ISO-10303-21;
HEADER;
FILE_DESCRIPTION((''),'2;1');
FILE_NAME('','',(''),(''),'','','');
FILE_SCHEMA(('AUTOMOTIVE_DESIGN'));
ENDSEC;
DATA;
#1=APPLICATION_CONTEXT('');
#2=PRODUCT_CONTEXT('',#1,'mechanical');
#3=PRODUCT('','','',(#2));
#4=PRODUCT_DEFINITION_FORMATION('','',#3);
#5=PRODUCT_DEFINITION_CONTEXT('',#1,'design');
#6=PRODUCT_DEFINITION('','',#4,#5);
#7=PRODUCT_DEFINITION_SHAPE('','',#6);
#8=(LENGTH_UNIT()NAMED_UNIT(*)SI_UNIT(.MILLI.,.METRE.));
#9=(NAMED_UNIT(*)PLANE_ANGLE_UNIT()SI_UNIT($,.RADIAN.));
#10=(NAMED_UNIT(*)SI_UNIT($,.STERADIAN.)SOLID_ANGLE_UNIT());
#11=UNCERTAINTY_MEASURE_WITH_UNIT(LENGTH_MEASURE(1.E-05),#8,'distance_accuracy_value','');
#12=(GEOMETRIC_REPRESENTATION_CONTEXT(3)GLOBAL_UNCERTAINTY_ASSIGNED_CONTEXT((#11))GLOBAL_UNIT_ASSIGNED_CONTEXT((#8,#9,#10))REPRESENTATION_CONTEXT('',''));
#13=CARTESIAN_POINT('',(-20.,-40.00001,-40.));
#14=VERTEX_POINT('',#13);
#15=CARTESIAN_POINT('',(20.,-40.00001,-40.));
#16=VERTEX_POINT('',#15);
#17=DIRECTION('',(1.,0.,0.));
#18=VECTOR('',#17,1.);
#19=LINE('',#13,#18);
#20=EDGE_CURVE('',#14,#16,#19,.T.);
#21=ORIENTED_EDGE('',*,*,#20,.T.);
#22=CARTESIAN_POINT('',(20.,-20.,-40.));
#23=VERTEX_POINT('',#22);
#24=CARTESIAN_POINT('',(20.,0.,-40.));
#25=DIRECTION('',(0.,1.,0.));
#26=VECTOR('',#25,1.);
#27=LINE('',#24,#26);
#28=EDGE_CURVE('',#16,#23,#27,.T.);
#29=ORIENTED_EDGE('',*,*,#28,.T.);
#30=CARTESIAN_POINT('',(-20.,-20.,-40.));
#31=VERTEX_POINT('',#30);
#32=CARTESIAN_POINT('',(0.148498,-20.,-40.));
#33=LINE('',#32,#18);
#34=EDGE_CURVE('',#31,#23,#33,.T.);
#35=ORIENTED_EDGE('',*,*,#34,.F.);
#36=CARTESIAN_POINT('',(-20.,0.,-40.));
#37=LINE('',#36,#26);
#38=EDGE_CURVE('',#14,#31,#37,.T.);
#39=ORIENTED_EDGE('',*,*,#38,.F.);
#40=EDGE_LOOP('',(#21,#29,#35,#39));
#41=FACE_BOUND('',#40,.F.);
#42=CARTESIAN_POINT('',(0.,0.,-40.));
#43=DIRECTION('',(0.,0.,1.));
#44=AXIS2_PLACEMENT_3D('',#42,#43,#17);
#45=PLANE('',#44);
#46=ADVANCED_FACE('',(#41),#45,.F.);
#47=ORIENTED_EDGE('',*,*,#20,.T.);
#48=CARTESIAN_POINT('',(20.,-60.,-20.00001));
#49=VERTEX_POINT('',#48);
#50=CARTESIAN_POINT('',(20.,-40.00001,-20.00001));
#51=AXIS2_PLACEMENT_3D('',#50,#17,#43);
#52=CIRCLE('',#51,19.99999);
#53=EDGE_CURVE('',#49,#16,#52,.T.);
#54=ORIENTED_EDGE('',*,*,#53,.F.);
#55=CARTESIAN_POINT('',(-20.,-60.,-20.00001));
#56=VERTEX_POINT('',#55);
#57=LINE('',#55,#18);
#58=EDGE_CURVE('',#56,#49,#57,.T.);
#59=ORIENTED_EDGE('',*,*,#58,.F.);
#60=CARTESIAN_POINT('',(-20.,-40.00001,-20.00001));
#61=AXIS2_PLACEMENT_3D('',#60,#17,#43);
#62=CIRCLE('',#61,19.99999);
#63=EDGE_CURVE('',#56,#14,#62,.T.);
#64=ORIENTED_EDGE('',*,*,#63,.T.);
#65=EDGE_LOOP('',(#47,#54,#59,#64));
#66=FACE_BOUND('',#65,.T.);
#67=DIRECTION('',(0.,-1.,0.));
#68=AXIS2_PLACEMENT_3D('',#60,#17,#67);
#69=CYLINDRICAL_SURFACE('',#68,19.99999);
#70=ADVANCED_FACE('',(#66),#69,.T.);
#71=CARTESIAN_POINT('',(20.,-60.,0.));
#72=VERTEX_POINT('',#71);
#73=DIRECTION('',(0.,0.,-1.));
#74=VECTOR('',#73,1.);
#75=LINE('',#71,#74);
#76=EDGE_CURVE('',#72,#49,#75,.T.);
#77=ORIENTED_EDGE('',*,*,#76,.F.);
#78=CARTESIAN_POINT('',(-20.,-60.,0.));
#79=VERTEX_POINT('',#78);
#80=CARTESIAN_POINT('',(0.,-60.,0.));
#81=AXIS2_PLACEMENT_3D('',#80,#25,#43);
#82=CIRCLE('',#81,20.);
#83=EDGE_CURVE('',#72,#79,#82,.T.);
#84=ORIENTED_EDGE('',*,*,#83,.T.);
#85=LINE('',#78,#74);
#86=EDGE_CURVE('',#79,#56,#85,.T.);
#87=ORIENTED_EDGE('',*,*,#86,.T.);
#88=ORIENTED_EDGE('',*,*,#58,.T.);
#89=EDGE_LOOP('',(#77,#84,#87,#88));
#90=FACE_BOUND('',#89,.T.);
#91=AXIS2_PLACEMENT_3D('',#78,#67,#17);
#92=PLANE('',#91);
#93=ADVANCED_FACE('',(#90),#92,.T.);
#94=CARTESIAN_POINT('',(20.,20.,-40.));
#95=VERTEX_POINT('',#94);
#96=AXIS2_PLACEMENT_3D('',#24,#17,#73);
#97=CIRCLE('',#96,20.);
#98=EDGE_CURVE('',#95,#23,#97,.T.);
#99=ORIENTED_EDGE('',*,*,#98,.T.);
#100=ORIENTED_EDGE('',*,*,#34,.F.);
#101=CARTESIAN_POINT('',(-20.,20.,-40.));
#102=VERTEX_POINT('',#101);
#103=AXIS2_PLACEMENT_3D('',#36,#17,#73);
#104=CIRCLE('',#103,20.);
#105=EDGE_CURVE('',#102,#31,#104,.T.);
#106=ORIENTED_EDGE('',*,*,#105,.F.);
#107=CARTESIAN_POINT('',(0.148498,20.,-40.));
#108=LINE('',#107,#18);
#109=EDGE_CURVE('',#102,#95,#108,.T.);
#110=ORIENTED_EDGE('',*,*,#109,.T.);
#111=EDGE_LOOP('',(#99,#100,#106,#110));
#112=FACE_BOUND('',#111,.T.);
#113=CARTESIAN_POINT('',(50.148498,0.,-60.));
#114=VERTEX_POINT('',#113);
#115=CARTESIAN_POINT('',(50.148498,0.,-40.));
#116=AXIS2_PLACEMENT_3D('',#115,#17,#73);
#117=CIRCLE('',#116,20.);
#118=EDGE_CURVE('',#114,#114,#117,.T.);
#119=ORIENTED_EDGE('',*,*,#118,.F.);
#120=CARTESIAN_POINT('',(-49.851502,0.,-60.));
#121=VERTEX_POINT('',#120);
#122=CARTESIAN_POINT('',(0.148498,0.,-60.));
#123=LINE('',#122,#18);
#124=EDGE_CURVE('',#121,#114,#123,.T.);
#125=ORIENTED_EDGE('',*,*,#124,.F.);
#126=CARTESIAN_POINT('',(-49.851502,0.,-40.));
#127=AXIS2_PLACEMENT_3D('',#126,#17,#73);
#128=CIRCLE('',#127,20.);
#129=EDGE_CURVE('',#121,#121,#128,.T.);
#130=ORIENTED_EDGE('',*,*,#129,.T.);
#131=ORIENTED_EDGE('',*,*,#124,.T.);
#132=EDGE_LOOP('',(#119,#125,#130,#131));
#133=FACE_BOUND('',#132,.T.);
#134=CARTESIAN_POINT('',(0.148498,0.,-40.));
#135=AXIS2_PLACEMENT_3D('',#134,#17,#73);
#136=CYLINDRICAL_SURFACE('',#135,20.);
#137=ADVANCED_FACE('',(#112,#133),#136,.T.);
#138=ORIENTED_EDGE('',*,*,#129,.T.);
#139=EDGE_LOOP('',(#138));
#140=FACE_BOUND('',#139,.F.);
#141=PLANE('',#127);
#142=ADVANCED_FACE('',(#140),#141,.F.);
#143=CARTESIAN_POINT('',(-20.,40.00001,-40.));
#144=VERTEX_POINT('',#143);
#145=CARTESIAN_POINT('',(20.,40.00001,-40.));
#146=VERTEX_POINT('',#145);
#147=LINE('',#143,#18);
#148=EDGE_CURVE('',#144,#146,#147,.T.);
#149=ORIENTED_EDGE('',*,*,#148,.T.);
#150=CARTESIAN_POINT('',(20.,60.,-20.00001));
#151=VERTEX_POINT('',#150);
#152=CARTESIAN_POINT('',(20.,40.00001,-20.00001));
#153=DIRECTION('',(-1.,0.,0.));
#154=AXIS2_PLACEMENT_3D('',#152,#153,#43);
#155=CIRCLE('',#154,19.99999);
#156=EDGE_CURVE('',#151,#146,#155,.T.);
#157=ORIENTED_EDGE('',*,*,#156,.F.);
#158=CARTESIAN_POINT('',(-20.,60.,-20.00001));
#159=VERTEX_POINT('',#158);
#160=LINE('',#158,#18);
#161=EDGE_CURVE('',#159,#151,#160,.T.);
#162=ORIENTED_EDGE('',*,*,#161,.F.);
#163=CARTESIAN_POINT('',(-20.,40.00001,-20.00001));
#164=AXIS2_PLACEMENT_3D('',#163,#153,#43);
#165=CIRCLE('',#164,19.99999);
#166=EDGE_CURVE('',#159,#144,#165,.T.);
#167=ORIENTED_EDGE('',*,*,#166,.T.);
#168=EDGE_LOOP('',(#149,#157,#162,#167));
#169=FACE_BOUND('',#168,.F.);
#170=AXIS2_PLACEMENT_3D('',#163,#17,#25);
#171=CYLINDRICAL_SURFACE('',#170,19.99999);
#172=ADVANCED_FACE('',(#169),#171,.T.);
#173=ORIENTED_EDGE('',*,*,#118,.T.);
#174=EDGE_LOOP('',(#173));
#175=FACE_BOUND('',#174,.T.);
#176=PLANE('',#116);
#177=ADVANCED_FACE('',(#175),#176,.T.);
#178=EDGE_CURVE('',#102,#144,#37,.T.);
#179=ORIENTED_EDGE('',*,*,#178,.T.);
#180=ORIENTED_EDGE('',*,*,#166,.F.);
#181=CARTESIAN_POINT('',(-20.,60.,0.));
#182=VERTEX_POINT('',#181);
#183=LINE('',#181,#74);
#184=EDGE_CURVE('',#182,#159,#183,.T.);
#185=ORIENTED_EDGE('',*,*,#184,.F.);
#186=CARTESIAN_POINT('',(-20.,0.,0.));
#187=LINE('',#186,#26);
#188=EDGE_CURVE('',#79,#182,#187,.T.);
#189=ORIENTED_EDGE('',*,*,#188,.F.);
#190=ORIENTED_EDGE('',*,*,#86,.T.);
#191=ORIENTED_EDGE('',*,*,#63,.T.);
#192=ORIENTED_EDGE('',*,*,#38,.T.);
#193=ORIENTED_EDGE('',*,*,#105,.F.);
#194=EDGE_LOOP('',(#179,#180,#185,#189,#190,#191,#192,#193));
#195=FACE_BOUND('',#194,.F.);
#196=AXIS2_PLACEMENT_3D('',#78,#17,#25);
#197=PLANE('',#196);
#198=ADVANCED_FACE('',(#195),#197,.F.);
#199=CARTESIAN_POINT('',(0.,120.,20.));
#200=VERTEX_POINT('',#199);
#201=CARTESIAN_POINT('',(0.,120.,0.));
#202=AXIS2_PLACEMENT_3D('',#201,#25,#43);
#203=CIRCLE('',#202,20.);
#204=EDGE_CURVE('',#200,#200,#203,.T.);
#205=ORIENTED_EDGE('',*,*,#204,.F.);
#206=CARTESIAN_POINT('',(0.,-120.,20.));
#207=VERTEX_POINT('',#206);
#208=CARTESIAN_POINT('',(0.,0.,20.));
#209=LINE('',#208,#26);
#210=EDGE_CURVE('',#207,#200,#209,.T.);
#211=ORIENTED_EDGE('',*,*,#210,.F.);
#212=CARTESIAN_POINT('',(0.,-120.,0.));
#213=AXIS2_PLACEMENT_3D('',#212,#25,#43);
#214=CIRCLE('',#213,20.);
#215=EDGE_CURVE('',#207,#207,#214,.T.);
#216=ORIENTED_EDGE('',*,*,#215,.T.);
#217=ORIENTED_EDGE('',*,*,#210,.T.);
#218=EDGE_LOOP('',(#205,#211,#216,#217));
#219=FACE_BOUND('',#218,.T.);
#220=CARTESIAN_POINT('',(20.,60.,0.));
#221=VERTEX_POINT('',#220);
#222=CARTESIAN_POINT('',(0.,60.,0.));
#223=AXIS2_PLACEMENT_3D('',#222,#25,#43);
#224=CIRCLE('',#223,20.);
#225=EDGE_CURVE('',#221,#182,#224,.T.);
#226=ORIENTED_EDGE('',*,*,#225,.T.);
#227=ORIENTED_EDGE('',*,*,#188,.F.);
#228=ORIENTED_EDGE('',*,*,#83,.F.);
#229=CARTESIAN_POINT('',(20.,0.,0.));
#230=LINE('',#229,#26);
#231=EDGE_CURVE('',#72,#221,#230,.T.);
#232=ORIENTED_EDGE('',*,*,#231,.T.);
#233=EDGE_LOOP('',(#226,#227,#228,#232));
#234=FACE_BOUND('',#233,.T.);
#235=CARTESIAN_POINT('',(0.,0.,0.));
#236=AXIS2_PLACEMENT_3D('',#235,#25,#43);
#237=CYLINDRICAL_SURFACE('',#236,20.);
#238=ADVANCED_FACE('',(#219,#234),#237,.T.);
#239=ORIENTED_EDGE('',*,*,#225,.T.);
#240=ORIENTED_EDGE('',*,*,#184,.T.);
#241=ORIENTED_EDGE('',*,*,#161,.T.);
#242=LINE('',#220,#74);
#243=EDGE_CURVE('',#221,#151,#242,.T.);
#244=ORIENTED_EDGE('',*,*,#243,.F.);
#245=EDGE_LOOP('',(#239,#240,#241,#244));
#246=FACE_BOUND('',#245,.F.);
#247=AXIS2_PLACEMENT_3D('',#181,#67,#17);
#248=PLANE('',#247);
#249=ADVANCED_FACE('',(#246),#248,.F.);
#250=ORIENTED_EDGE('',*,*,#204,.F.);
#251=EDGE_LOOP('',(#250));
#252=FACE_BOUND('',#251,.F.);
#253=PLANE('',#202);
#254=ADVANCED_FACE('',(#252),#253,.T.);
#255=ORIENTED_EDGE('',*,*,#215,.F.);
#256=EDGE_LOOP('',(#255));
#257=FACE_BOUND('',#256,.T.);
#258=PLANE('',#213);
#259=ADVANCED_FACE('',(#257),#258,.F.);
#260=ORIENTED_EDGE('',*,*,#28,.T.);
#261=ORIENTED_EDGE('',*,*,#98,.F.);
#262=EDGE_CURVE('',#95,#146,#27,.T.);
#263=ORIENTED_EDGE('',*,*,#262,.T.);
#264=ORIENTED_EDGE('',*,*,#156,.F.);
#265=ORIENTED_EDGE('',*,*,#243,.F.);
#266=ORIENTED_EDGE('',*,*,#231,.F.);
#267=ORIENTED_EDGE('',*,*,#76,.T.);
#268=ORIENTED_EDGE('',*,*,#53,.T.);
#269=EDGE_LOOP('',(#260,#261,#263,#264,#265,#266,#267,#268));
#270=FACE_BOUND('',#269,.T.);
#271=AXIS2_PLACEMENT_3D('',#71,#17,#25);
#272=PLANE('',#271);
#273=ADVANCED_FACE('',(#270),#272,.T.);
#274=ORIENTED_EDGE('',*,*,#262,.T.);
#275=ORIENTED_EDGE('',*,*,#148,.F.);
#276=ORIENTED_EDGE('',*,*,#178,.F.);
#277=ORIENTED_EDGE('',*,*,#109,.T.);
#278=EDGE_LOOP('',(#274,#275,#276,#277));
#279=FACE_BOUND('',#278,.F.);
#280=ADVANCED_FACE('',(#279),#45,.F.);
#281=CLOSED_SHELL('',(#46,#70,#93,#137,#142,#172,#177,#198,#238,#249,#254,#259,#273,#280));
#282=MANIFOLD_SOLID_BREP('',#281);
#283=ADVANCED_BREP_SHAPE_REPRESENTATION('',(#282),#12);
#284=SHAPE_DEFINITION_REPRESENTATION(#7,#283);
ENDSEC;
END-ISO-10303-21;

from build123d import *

# Parameters (mm, degrees)
F0_W     = 240
F0_H     = 20
F2_W     = 40
F2_H     = 120
F3_DEPTH = 40
F4_R     = 19.99999
F5_W     = 100
F5_H     = 20


# Not quite as in the source:
# - a fillet or chamfer is up to 0.001 mm smaller than in the source, because OpenCascade refuses the exact size


with BuildPart() as f1:
    # F0 (on Right) → F1 (revolve)
    with BuildSketch(Plane.YZ):
        with Locations((0, 10)):
            Rectangle(F0_W, F0_H)
    revolve(axis=Axis((0, 0, 0), (0, 1, 0)))

    # F2 (on Top) → F3 (join)
    with BuildSketch(Plane.XY):
        Rectangle(F2_W, F2_H)
    extrude(amount=-F3_DEPTH)

    # F4 (radius 20 in the source; OpenCascade refuses exactly that, so slightly less here)
    f4_edges = [f1.edges().sort_by_distance(p)[0] for p in [
        (0, -60, -40),
        (0, 60, -40),
    ]]
    fillet(f4_edges, radius=F4_R)

    # F5 (on Front) → F6 (revolve)
    with BuildSketch(Plane.XZ):
        with Locations((0.1484978533, -50)):
            Rectangle(F5_W, F5_H)
    revolve(axis=Axis((43.9392195031, 0, -40), (1, 0, 0)))


solid = f1.part
